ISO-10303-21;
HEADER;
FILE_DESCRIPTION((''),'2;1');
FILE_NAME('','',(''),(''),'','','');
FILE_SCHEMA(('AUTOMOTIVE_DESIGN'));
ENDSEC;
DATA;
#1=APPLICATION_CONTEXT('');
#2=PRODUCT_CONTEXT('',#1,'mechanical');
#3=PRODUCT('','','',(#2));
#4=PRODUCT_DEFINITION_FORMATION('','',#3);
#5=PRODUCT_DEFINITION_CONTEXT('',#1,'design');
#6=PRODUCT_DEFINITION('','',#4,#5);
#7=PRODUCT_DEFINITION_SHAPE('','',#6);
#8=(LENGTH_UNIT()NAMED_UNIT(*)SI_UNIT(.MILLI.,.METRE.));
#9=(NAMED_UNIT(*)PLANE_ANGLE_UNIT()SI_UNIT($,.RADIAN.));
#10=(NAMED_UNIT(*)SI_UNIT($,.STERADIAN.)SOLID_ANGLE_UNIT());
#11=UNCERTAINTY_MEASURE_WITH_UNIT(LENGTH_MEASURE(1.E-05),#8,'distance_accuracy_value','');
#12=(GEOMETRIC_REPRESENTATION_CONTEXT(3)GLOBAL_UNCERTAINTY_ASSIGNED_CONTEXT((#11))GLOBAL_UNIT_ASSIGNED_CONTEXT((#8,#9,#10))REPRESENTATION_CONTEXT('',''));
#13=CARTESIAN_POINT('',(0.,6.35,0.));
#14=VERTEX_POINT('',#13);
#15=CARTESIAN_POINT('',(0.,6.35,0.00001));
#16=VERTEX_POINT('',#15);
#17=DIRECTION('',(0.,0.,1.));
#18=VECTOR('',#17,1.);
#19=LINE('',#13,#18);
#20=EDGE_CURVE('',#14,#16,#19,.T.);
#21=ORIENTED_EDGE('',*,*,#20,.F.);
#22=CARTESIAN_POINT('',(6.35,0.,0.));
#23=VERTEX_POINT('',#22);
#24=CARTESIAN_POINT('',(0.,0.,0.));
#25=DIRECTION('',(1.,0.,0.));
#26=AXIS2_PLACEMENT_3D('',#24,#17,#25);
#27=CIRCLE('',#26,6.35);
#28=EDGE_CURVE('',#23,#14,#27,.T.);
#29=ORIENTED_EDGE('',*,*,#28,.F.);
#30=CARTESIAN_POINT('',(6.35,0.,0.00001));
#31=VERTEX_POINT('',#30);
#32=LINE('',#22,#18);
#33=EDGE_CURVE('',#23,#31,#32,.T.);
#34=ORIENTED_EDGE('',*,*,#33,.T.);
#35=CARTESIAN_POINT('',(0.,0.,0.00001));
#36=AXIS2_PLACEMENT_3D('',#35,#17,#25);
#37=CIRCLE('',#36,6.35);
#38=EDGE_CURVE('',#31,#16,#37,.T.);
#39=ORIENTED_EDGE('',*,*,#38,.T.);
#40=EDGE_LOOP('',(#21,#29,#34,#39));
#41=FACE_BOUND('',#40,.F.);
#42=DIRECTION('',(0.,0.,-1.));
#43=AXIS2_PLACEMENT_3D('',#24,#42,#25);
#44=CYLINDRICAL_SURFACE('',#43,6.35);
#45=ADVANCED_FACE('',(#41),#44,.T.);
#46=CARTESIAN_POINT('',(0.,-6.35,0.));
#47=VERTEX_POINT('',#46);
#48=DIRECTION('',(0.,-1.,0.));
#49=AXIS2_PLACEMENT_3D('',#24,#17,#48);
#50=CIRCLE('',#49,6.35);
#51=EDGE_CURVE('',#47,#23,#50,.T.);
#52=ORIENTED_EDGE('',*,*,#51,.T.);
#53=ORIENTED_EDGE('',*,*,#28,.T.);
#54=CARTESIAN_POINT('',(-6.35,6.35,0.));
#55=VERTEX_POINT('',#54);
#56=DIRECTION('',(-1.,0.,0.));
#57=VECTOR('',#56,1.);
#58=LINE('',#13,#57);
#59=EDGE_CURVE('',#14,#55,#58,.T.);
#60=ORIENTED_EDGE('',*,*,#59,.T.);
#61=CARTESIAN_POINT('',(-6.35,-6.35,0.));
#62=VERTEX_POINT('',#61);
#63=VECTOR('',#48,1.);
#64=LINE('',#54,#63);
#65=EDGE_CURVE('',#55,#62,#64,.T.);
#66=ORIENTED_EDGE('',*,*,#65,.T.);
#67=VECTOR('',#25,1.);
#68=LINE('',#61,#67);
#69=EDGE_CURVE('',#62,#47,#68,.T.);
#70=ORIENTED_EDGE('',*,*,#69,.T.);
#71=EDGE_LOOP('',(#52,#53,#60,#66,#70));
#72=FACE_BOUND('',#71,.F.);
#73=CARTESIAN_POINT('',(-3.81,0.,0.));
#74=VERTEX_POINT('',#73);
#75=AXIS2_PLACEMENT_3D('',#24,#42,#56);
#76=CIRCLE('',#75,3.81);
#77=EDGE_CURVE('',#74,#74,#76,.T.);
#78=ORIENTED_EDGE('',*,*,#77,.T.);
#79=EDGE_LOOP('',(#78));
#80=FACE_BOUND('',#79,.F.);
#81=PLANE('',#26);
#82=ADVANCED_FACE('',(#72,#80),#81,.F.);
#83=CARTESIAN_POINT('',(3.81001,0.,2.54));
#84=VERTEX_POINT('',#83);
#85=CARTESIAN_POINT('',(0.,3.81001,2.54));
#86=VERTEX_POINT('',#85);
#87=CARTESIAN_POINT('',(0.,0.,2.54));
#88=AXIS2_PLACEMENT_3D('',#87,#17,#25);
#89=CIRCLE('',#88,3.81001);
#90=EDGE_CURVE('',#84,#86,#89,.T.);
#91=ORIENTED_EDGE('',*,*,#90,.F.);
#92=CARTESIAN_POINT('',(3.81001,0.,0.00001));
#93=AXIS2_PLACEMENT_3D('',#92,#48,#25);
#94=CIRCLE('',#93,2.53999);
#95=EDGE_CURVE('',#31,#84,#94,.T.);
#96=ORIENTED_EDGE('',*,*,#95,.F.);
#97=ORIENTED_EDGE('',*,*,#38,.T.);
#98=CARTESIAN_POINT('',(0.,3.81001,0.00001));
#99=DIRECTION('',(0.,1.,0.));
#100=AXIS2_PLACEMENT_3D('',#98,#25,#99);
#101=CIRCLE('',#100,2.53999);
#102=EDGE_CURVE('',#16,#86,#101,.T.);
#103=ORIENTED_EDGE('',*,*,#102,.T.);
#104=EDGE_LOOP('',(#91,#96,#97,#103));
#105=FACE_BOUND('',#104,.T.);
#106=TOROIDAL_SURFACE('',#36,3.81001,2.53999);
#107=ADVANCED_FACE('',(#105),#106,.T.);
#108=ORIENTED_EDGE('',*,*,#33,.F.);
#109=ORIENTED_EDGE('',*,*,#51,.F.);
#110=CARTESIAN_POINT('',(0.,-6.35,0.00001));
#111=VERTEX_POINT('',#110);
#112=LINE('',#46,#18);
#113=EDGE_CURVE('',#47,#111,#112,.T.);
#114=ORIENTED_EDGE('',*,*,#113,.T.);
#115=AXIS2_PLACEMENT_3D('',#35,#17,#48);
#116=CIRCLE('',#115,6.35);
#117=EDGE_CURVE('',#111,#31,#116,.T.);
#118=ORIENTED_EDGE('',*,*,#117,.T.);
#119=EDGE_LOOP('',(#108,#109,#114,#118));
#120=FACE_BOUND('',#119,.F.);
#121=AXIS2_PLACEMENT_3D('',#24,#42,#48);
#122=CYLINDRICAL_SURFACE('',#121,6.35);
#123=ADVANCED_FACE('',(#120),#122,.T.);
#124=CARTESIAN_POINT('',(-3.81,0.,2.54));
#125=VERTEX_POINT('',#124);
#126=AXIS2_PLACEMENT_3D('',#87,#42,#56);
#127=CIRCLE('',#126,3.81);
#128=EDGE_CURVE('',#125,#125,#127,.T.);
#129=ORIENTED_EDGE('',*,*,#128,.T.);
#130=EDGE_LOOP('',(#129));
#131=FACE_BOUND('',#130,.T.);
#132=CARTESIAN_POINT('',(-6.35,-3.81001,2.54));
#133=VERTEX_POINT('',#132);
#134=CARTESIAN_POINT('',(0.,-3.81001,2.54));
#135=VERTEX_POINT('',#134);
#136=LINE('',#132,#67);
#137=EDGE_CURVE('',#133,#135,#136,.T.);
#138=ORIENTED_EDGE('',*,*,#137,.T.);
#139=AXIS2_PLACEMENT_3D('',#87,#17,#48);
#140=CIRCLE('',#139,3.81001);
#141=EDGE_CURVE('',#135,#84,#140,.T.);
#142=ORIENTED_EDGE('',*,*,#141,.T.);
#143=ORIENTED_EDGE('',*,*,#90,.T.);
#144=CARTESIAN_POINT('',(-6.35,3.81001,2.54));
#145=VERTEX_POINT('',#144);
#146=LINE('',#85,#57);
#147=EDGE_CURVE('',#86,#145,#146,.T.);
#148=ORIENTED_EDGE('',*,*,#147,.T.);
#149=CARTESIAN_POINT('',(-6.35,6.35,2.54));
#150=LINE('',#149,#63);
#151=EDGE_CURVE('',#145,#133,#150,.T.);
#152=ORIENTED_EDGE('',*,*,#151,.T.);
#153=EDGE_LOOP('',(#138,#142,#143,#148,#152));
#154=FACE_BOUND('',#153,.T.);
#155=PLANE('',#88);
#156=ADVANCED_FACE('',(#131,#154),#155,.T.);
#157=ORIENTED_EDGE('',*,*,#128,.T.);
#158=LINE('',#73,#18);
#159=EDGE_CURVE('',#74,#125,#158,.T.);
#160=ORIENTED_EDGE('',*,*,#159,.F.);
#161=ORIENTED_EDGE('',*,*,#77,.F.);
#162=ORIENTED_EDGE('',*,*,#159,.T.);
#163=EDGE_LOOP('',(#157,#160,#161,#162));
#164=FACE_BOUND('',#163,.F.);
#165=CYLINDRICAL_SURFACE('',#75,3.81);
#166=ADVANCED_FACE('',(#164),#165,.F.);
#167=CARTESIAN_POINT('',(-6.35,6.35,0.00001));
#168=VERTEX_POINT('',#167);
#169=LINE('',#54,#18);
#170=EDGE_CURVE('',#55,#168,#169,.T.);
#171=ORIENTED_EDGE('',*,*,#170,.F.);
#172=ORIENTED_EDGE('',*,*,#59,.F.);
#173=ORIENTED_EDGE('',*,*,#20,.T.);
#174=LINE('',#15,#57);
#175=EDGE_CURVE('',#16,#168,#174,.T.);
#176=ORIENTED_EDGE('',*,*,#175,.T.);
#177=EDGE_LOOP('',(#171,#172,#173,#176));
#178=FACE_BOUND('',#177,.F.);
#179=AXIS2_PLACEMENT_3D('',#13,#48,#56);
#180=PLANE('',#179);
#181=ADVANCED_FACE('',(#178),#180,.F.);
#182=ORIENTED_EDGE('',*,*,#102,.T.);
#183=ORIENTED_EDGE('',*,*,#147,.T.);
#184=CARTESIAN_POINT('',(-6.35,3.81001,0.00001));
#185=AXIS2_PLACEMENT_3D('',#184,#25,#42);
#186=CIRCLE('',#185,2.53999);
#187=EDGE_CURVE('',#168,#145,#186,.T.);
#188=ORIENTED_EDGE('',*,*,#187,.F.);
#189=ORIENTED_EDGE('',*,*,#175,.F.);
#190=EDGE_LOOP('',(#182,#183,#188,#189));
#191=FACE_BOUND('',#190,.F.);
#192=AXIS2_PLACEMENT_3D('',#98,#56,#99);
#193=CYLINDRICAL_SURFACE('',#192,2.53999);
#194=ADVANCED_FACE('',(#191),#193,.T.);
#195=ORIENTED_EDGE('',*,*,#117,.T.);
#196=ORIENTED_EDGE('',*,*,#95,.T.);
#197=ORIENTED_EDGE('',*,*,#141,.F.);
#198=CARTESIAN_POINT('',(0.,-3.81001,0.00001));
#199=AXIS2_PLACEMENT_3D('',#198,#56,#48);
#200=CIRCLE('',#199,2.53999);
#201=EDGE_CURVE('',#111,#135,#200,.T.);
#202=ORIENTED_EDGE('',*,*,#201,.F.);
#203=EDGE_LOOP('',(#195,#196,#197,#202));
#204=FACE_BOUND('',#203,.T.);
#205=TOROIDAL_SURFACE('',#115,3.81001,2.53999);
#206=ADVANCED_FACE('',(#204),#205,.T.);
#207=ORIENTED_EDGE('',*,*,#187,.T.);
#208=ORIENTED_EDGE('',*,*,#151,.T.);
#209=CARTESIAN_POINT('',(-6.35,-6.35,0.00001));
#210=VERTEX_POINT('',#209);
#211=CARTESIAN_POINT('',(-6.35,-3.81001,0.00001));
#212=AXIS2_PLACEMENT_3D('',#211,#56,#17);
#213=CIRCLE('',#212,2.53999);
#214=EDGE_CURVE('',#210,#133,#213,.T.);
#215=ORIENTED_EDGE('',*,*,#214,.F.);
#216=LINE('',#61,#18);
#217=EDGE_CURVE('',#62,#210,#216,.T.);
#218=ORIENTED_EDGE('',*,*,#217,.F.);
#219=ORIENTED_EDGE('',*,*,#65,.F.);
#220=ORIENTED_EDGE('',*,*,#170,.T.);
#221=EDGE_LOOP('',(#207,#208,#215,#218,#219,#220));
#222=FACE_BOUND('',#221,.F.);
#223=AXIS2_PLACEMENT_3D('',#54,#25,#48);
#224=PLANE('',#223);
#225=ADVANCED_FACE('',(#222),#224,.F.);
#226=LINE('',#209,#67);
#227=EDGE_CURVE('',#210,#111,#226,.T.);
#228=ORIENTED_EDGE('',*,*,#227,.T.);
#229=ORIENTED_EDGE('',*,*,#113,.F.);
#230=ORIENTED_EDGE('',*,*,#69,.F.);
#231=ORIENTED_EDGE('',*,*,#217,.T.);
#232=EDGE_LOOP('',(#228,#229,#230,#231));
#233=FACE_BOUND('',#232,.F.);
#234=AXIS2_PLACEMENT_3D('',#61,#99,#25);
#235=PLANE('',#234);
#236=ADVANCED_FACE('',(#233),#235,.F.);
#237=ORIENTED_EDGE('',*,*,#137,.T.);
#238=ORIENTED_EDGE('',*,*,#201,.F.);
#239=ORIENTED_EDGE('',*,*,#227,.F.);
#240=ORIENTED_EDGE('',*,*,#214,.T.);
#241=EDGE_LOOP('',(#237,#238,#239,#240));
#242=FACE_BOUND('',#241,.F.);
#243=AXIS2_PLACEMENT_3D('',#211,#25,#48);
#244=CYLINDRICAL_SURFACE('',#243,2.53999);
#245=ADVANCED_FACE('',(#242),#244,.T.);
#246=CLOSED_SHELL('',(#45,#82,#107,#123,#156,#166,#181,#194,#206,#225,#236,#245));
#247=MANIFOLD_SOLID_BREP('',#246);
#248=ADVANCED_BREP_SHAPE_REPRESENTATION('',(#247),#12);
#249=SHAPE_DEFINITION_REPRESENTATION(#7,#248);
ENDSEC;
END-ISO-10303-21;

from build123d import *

# Parameters (mm, degrees)
F1_DEPTH = 2.54
F2_R     = 2.53999


# Not quite as in the source:
# - a fillet or chamfer is up to 0.001 mm smaller than in the source, because OpenCascade refuses the exact size


with BuildPart() as f1:
    # F0 (on Top) → F1 (new body)
    with BuildSketch(Plane.XY):
        with BuildLine():
            ThreePointArc((0, -6.35), (4.4901280605, -4.4901280605), (6.35, 0))
            ThreePointArc((6.35, 0), (4.4901280605, 4.4901280605), (0, 6.35))
            ThreePointArc((0, 6.35), (-4.4901280605, 4.4901280605), (-6.35, 0))
            ThreePointArc((-6.35, 0), (-4.4901280605, -4.4901280605), (0, -6.35))
        make_face()
        with BuildLine():
            ThreePointArc((3.81, 0), (0, -3.81), (-3.81, 0))
            ThreePointArc((-3.81, 0), (0, 3.81), (3.81, 0))
        make_face(mode=Mode.SUBTRACT)
        with BuildLine():
            ThreePointArc((-6.35, 0), (-4.4901280605, 4.4901280605), (0, 6.35))
            Line((0, 6.35), (-6.35, 6.35))
            Line((-6.35, 6.35), (-6.35, 0))
        make_face()
        with BuildLine():
            Line((-6.35, -6.35), (0, -6.35))
            ThreePointArc((0, -6.35), (-4.4901280605, -4.4901280605), (-6.35, 0))
            Line((-6.35, 0), (-6.35, -6.35))
        make_face()
    extrude(amount=F1_DEPTH)

    # F2 (radius 2.54 in the source; OpenCascade refuses exactly that, so slightly less here)
    f2_edges = [f1.edges().sort_by_distance(p)[0] for p in [
        (-3.175, 6.35, 2.54),
    ]]
    fillet(f2_edges, radius=F2_R)


solid = f1.part
